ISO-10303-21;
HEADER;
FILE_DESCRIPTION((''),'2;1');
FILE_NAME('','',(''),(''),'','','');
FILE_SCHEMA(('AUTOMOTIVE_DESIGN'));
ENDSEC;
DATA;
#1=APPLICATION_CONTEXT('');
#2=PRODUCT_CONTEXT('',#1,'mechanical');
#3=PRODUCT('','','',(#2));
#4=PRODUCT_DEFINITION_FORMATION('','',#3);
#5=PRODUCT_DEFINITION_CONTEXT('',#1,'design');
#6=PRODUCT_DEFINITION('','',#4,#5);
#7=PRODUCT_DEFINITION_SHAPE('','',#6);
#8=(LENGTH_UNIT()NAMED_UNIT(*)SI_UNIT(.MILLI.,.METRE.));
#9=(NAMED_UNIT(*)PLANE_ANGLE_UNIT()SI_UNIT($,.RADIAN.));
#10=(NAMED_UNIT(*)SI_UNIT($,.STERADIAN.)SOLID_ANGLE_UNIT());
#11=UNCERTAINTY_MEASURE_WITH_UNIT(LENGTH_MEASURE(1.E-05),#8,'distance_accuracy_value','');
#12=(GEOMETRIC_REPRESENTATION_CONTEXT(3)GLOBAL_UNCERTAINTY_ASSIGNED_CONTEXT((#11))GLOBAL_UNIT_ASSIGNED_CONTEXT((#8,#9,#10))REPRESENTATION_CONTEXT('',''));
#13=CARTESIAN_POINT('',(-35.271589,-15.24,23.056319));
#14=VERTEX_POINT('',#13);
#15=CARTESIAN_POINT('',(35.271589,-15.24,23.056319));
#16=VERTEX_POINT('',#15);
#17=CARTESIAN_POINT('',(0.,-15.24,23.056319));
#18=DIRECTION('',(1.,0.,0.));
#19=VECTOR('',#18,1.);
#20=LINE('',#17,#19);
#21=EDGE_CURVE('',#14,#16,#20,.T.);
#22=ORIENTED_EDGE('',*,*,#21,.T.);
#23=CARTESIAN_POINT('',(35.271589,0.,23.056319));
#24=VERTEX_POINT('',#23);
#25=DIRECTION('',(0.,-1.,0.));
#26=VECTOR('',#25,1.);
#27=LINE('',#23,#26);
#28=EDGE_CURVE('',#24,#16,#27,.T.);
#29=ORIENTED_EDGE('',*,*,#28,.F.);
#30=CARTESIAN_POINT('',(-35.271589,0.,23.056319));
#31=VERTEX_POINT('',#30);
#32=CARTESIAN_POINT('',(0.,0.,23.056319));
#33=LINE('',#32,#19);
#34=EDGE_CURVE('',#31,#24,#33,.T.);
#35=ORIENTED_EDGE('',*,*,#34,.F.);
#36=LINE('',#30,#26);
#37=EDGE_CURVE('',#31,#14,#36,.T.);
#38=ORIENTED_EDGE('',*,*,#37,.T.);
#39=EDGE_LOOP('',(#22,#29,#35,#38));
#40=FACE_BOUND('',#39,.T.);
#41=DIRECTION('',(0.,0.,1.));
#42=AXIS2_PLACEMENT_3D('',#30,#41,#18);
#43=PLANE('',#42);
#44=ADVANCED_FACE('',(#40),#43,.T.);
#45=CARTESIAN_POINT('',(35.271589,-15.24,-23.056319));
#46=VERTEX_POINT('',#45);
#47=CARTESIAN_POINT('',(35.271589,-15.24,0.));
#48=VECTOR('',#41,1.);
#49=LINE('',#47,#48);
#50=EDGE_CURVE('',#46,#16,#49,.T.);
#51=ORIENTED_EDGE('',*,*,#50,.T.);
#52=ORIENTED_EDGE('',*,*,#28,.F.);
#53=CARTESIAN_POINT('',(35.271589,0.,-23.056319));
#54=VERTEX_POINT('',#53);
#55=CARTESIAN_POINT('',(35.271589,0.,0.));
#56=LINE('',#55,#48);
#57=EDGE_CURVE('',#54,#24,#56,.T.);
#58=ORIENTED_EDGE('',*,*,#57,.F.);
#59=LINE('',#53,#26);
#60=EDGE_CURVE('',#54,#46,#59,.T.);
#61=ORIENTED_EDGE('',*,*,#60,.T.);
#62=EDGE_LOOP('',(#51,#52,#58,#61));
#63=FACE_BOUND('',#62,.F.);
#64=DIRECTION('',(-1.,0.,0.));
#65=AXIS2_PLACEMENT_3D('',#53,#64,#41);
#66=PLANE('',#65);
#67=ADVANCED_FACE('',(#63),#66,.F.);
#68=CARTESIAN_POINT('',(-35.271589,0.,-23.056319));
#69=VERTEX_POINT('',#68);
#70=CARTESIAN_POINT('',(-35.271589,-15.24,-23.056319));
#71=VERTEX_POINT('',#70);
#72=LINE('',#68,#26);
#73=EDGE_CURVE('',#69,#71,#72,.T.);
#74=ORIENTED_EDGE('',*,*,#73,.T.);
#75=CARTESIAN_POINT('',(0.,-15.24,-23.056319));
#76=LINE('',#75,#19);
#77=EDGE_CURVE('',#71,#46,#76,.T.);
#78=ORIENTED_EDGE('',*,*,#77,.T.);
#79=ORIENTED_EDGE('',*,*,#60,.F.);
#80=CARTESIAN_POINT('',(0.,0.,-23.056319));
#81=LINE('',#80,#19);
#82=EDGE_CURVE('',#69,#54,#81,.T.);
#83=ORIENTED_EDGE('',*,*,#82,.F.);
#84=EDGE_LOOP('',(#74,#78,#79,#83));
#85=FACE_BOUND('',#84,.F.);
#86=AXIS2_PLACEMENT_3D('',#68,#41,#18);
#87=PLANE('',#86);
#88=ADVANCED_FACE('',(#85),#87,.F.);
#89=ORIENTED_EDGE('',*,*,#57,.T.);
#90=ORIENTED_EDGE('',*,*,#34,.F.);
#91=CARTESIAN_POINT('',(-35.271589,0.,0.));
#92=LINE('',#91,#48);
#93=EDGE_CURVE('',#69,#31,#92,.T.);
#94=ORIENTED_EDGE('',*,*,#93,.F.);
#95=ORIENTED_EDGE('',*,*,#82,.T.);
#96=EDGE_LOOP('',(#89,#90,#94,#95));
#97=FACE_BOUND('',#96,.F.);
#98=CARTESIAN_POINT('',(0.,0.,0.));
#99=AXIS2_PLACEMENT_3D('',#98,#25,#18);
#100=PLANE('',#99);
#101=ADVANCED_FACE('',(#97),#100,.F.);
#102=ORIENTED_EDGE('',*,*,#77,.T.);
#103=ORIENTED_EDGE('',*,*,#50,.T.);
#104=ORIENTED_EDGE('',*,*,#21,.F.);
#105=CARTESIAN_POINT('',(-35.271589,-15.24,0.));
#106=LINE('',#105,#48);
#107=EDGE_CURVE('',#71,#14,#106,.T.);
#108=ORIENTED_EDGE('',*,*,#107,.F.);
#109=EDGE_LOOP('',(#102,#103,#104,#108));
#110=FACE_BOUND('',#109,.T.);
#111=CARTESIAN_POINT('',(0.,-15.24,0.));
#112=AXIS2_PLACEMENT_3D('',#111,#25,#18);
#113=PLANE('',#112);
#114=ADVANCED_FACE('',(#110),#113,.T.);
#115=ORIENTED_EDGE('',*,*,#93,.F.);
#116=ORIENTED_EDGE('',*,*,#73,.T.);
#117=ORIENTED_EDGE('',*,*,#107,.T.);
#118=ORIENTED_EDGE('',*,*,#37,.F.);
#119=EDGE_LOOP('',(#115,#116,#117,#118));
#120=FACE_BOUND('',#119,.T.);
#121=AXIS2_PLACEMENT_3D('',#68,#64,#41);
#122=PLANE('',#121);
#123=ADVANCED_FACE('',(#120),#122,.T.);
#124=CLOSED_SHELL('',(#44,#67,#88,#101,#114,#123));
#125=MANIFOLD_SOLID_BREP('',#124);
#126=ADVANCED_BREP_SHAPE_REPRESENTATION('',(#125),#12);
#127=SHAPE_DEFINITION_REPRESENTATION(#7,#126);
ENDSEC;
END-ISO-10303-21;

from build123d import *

# Parameters (mm, degrees)
F0_W     = 70.5431774259
F0_H     = 46.1126379669
F1_DEPTH = 15.24


# Not quite as in the source:
# - the program builds the solid bodies; features that only make, move or delete a surface that nothing else refers to are left out


with BuildPart() as f1:
    # F0 (on Front) → F1 (new body)
    with BuildSketch(Plane.XZ):
        Rectangle(F0_W, F0_H)
    extrude(amount=F1_DEPTH)


solid = f1.part
